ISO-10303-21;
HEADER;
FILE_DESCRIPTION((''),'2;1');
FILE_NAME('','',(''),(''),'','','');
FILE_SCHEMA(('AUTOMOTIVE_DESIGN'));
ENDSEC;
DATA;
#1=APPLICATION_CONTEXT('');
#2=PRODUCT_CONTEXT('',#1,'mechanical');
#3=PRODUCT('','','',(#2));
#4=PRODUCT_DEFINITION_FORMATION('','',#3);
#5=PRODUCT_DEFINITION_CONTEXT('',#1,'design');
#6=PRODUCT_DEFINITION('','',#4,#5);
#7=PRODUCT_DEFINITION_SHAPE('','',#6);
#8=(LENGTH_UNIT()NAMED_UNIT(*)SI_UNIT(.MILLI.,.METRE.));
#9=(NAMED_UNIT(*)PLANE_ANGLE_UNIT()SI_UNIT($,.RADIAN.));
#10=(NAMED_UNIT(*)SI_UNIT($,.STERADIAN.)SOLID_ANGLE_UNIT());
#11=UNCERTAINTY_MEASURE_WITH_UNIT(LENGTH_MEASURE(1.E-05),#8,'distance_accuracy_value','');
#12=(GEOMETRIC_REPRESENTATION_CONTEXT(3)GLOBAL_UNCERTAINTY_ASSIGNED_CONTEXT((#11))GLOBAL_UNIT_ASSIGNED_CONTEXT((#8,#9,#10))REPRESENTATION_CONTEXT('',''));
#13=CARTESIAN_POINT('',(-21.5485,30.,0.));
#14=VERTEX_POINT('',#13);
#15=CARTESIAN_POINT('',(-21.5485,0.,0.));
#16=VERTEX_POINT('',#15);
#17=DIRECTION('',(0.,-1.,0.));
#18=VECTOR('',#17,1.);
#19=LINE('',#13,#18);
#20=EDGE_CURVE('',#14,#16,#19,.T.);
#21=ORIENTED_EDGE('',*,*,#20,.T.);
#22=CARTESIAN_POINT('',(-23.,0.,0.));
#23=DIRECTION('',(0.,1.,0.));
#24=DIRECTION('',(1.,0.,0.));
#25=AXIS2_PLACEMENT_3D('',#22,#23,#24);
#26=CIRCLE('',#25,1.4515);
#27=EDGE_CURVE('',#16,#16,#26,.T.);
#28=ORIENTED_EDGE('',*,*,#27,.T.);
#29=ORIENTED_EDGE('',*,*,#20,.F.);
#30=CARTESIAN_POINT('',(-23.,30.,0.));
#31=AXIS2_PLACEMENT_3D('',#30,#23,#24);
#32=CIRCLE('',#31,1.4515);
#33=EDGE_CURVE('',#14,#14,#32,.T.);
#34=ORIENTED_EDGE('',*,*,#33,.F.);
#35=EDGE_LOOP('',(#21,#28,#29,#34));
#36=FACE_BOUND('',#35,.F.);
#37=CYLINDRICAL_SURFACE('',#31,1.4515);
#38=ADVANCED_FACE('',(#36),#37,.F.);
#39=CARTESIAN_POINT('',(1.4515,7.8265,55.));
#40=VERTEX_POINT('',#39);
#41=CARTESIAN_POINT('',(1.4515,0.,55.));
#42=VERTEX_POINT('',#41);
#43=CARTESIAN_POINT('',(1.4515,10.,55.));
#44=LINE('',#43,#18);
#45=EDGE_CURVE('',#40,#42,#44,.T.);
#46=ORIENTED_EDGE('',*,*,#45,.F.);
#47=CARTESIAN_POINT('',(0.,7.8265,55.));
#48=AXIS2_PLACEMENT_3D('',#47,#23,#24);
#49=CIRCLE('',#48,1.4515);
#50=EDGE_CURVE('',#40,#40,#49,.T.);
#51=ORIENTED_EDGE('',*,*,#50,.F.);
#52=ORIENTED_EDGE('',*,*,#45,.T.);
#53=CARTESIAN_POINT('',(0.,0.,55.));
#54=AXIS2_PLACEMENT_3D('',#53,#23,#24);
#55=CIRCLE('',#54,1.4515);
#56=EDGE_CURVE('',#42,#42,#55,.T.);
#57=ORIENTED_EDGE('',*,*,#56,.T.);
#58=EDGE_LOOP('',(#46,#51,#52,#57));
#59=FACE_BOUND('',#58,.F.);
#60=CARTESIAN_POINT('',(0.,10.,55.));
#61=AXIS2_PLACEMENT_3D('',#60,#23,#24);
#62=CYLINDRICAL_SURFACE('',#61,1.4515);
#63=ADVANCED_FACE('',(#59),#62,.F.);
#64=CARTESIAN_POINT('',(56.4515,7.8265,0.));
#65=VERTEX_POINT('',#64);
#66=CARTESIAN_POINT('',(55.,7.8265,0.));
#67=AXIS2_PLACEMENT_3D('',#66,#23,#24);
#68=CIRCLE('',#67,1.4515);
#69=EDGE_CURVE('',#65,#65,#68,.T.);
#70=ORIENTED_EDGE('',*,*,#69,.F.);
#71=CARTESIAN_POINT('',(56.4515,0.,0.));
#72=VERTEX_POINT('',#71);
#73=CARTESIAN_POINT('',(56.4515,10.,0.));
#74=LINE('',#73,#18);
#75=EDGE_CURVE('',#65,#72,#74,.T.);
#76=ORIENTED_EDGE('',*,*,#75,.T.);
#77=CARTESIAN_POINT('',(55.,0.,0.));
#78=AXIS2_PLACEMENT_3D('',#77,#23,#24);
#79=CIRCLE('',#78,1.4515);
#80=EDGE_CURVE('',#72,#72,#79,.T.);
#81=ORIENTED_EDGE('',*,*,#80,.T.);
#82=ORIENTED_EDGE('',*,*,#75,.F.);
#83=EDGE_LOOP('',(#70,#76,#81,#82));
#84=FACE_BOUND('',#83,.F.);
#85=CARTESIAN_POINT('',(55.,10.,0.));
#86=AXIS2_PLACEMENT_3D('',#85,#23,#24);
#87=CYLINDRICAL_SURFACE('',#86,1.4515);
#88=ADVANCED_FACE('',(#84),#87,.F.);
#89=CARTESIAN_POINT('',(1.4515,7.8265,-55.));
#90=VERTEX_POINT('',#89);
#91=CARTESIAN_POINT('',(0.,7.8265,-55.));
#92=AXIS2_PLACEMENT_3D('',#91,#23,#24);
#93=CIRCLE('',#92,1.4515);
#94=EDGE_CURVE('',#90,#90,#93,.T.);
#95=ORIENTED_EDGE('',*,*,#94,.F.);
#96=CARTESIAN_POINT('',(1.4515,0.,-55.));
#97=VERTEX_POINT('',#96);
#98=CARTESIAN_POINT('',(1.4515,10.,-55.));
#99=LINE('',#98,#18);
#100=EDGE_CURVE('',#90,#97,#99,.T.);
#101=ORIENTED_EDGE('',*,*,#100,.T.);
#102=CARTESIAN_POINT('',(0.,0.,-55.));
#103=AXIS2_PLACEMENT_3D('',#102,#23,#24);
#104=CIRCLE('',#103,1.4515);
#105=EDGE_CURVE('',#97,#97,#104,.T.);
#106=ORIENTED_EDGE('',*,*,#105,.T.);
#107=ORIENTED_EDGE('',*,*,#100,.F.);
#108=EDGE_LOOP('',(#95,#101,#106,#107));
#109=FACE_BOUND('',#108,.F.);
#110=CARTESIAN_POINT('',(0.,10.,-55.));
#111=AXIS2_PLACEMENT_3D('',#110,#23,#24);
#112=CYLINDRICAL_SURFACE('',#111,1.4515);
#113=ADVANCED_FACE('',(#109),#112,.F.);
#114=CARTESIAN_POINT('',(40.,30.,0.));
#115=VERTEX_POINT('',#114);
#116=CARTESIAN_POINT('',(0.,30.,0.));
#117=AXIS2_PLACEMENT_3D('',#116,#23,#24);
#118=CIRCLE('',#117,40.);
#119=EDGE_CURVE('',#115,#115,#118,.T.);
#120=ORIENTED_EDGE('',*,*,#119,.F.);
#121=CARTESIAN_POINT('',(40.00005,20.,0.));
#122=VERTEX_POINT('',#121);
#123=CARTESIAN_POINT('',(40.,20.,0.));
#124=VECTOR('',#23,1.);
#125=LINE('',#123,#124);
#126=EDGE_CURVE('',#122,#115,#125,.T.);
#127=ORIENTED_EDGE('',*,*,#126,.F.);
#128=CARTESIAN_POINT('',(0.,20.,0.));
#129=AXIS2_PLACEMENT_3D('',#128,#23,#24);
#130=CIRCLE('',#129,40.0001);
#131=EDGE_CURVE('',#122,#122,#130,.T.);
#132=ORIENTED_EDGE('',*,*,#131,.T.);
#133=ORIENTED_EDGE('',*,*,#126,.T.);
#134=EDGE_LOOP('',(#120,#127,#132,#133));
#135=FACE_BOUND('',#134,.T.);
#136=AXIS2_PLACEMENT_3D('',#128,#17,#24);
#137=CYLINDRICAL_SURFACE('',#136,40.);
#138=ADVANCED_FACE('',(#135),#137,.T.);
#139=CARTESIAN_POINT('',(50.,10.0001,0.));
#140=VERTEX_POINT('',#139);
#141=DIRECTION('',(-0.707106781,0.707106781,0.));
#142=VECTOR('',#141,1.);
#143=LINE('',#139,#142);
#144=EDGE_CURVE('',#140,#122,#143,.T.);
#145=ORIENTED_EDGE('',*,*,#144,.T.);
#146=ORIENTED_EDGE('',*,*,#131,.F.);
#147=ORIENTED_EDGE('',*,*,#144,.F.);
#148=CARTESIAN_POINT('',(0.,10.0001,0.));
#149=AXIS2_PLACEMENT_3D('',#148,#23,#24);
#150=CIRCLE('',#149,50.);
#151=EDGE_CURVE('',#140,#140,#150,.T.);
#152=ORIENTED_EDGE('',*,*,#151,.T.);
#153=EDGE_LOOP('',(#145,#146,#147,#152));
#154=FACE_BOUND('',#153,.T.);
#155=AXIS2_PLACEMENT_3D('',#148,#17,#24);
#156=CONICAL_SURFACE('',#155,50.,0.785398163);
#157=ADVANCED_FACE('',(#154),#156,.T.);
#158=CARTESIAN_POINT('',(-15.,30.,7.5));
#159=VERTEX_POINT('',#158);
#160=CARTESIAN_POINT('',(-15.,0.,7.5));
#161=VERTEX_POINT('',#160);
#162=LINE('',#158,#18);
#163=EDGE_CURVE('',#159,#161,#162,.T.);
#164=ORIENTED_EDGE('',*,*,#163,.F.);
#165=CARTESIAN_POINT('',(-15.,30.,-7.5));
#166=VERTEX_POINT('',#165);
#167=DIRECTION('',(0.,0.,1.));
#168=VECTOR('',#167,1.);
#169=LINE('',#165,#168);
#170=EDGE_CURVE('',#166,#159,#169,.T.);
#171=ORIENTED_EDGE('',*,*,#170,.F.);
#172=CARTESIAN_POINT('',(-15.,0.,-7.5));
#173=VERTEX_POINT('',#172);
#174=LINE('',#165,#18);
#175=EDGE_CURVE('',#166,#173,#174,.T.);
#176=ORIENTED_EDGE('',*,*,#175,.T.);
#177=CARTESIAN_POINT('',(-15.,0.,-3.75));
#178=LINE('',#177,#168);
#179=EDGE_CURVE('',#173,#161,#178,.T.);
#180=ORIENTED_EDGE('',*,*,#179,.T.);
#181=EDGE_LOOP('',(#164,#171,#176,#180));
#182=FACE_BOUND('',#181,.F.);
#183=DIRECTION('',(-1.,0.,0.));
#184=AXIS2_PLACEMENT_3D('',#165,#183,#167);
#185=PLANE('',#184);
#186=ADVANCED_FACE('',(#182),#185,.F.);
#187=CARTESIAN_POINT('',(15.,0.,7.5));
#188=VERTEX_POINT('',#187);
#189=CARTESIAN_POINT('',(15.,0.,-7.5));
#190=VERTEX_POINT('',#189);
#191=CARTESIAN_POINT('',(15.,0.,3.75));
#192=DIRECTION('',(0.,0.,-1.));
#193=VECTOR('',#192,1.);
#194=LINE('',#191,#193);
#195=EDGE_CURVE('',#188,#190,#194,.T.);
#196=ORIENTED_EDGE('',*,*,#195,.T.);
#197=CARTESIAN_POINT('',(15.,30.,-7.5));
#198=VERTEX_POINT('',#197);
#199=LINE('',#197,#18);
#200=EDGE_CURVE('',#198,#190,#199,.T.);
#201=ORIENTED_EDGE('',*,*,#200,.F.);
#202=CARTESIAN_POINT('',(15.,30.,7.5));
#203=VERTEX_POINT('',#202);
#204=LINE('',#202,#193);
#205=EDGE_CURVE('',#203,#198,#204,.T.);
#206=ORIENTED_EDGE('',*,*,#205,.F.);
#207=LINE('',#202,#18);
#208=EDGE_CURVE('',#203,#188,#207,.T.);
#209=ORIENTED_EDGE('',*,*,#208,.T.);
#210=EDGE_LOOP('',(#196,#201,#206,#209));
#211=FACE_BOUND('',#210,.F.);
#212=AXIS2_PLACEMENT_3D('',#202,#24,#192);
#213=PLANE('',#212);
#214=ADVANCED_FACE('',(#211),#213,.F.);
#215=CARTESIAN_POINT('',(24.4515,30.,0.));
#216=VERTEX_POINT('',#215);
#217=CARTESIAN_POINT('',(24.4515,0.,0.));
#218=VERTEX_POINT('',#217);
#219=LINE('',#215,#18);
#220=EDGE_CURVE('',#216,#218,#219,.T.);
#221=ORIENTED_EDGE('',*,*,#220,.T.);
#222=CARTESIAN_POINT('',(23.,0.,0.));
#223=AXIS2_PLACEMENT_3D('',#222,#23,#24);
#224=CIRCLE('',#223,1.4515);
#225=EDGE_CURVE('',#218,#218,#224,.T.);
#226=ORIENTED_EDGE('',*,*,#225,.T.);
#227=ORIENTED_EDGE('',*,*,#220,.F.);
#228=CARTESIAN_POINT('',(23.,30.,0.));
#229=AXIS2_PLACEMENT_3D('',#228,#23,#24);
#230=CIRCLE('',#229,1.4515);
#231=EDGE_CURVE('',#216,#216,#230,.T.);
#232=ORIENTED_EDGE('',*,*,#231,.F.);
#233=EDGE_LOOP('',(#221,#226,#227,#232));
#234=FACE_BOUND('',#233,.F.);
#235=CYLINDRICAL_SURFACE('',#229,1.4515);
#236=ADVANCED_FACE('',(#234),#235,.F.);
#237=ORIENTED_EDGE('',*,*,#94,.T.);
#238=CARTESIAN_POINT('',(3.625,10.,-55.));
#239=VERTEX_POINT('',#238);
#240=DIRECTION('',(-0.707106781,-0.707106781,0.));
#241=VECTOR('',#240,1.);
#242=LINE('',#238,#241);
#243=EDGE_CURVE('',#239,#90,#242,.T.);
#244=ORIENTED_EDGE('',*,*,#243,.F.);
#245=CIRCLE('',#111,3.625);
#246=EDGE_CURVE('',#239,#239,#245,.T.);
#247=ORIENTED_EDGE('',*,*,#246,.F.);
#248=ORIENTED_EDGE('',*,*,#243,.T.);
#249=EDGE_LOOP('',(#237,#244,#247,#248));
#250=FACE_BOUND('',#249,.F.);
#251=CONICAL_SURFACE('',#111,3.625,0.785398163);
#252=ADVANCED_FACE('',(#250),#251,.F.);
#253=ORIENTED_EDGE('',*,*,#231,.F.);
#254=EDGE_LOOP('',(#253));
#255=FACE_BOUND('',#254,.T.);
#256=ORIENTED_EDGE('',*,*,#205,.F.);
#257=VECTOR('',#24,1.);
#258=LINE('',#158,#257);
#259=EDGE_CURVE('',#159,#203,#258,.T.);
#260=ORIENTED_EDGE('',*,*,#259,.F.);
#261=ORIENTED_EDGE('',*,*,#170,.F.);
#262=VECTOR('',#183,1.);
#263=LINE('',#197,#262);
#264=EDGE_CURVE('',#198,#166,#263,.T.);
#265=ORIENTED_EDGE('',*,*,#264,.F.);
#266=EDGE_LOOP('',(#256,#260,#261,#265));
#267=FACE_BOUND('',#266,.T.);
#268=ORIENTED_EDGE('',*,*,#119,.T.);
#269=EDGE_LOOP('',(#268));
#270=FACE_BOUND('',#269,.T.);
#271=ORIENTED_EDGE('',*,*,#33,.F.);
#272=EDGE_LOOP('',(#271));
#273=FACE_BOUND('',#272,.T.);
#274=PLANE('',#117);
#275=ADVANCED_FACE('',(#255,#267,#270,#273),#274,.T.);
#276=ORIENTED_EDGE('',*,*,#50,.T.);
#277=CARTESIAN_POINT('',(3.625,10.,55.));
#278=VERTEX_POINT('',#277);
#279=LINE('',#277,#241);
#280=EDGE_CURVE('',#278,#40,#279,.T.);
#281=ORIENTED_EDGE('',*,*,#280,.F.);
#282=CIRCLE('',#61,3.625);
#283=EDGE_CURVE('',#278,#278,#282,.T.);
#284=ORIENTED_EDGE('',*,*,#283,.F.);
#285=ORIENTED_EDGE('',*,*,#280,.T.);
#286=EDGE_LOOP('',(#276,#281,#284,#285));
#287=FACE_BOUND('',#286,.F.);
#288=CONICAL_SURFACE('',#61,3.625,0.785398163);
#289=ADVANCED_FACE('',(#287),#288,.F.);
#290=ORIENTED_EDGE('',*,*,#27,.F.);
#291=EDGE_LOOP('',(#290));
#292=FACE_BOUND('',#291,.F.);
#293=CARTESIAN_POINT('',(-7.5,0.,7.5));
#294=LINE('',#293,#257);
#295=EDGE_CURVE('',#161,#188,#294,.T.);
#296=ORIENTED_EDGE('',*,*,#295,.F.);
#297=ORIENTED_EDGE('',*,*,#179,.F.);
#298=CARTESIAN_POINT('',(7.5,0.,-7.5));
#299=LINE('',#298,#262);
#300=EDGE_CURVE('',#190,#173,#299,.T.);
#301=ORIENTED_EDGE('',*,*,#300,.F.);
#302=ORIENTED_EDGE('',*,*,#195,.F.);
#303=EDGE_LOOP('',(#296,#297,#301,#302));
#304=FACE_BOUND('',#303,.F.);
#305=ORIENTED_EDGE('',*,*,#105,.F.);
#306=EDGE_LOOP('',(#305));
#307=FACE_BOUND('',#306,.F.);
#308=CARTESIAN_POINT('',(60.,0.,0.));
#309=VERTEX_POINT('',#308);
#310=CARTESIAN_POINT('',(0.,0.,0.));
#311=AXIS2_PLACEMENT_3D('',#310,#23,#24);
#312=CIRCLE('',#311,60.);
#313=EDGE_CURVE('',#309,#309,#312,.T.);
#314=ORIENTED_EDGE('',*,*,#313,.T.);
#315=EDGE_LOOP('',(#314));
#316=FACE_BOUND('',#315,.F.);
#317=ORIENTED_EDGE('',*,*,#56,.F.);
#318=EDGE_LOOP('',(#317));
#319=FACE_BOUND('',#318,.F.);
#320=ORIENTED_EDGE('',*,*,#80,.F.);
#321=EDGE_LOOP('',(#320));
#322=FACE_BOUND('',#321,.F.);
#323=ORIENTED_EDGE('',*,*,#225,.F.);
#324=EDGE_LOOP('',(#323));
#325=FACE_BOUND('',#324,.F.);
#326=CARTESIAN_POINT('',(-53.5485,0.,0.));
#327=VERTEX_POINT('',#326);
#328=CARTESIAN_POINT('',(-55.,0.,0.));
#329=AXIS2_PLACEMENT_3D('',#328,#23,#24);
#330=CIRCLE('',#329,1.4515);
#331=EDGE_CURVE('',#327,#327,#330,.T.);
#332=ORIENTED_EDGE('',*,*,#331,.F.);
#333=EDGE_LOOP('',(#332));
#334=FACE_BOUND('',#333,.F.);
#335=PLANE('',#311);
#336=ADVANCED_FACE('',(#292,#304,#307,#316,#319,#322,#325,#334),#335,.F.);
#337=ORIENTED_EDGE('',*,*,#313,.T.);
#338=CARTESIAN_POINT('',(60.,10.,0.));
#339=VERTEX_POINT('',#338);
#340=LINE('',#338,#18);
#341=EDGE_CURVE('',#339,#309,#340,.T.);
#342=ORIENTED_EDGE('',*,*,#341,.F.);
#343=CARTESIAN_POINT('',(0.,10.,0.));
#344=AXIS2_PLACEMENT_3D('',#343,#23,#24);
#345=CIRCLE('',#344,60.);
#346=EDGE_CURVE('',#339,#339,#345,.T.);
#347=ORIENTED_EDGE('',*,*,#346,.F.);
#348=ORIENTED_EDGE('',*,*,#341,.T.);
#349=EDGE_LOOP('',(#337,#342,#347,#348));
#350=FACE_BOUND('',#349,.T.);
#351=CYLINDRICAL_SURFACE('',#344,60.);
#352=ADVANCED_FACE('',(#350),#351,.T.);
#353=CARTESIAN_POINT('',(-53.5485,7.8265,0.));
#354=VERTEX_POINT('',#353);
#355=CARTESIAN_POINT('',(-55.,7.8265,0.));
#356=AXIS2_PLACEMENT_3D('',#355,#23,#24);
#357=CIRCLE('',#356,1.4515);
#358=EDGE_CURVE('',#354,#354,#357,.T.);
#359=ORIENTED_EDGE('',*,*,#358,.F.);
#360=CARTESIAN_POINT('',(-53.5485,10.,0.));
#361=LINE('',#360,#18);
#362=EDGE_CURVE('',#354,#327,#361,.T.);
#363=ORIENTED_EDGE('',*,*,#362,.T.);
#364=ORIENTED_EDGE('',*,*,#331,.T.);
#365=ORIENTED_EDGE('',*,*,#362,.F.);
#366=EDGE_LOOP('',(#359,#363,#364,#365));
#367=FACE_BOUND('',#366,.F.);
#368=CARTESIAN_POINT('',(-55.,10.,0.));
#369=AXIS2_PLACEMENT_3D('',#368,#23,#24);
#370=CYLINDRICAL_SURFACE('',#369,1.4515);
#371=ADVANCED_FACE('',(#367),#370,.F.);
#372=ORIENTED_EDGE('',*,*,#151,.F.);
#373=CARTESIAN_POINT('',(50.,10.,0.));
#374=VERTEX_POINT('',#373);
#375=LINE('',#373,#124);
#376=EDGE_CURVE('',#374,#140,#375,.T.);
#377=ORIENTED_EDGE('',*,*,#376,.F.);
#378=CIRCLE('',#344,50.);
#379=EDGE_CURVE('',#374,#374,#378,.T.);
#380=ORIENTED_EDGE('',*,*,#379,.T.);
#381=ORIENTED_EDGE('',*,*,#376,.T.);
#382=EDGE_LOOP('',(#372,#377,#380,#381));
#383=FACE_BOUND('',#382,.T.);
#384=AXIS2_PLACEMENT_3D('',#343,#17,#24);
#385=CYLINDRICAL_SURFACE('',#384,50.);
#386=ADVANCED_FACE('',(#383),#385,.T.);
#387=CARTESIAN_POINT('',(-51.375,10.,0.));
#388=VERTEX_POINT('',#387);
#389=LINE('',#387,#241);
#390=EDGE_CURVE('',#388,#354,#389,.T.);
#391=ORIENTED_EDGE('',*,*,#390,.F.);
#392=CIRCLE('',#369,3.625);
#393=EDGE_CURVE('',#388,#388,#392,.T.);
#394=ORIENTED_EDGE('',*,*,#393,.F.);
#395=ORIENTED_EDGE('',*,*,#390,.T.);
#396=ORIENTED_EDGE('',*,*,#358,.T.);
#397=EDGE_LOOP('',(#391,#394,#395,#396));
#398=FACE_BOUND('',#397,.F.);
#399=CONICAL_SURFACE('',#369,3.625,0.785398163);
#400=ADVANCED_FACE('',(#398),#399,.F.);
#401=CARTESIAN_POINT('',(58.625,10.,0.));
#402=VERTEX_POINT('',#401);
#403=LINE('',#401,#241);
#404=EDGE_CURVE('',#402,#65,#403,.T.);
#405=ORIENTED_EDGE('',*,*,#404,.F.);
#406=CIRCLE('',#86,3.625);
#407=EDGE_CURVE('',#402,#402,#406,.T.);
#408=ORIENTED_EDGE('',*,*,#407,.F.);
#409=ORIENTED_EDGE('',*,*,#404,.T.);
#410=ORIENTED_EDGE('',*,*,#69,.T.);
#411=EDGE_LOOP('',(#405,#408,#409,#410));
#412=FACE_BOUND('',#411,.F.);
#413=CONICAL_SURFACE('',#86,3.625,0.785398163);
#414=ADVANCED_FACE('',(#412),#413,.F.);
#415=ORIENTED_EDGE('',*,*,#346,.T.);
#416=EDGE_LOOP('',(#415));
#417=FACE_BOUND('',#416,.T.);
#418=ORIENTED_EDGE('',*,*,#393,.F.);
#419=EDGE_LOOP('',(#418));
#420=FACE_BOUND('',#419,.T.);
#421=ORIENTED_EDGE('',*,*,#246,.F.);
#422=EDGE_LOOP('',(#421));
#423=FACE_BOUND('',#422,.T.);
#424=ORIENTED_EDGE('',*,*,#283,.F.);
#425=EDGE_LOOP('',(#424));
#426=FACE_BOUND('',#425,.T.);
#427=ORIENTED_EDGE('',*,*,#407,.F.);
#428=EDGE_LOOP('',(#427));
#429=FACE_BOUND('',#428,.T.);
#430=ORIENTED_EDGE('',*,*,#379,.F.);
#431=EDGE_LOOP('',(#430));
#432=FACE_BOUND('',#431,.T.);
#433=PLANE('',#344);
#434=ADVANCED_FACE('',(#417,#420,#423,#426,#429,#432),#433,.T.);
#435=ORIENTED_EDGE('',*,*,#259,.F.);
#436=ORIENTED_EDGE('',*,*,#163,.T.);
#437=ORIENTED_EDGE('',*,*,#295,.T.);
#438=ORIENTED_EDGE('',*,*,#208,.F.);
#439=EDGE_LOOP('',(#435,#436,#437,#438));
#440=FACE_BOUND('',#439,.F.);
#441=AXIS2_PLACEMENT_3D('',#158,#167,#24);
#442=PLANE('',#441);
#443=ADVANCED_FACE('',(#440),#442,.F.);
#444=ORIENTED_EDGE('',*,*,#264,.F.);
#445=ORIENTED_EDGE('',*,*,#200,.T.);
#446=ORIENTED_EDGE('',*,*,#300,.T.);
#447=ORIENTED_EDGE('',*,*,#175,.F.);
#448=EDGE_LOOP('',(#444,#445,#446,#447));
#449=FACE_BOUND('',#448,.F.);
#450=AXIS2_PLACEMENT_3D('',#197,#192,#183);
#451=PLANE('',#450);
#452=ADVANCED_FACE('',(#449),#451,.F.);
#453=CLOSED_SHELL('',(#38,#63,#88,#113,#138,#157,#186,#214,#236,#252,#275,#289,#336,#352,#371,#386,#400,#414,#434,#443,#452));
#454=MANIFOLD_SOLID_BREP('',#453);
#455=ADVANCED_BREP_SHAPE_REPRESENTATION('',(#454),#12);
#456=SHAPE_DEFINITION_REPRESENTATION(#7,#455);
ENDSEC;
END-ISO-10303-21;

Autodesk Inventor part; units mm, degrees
ref_plane "YZ Plane" through (0, 0, 0) normal (1, 0, 0) x (0, 1, 0)
ref_plane "XZ Plane" through (0, 0, 0) normal (0, 1, 0) x (-1, 0, 0)
ref_plane "XY Plane" through (0, 0, 0) normal (0, 0, 1) x (1, 0, 0)
sketch "Sketch1" plane through (0, 0, 0) normal (0, 1, 0) x (-1, 0, 0)
  circle A0 centre (0, 0) radius 55
  dimension "d0" = 110
extrude "Extrusion1" add sketch "Sketch1" along normal blind 10
sketch "Sketch2" plane through (0, 10, 0) normal (0, 1, 0) x (1, 0, 0)
  circle A0 centre (0, 0) radius 50
  dimension "d3" = 100
extrude "Extrusion2" add sketch "Sketch2" along normal blind 10
chamfer "Chamfer1" distance 10 angle 45 1 edges at (-50, 20, 0)
sketch "Sketch3" plane through (0, 20, 0) normal (0, 1, 0) x (1, 0, 0)
  circle A0 centre (0, 0) radius 40
  dimension "d9" = 80
extrude "Extrusion3" add sketch "Sketch3" along normal blind 10
sketch "Sketch4" plane through (0, 10, 0) normal (0, 1, 0) x (1, 0, 0)
  circle A0 centre (0, 0) radius 60
  dimension "d12" = 120
extrude "Extrusion4" add sketch "Sketch4" against normal blind 10
sketch "Sketch5" plane through (0, 10, 0) normal (0, 1, 0) x (1, 0, 0)
  circle A0 centre (0, 55) radius 3.625
  circle A1 centre (0, 0) radius 60 projected
  circle A2 centre (-55, 0) radius 3.625
  circle A3 centre (0, -55) radius 3.625
  circle A4 centre (55, 0) radius 3.625
  dimension "d15" = 7.25
  dimension "d16" = 55
  dimension "d19" = 360
extrude "Extrusion5" cut sketch "Sketch5" against normal blind 2.1735 draft -45 contours A0 | A2 | A3 | A4
sketch "Sketch6" plane through (0, 10, 0) normal (0, 1, 0) x (1, 0, 0)
  circle A0 centre (0, 55) radius 1.4515
  circle A1 centre (0, 0) radius 60 projected
  circle A2 centre (-55, 0) radius 1.4515
  circle A3 centre (0, -55) radius 1.4515
  circle A4 centre (55, 0) radius 1.4515
  dimension "d23" = 2.903
  dimension "d24" = 55
  dimension "d27" = 360
extrude "Extrusion6" cut sketch "Sketch6" against normal through all contours A0 | A2 | A3 | A4
sketch "Sketch7" plane through (0, 30, 0) normal (0, 1, 0) x (1, 0, 0)
  line L0 (15, 7.5) -> (-15, 7.5)
  line L1 (-15, 7.5) -> (-15, -7.5)
  line L2 (-15, -7.5) -> (15, -7.5)
  line L3 (15, -7.5) -> (15, 7.5)
  line L4 (15, 7.5) -> (-15, -7.5) construction
  line L5 (-15, 7.5) -> (15, -7.5) construction
  point P0 (0, 0)
  dimension "d31" = 30
  dimension "d32" = 15
extrude "Extrusion7" cut sketch "Sketch7" against normal through all
sketch "Sketch8" plane through (0, 30, 0) normal (0, 1, 0) x (1, 0, 0)
  circle A0 centre (-23, 0) radius 1.4515
  circle A1 centre (0, 0) radius 40 projected
  circle A2 centre (23, 0) radius 1.4515
  dimension "d35" = 2.903
  dimension "d36" = 23
  dimension "d39" = 360
extrude "Extrusion8" cut sketch "Sketch8" against normal through all contours A0 | A2
properties part number "base 1"
